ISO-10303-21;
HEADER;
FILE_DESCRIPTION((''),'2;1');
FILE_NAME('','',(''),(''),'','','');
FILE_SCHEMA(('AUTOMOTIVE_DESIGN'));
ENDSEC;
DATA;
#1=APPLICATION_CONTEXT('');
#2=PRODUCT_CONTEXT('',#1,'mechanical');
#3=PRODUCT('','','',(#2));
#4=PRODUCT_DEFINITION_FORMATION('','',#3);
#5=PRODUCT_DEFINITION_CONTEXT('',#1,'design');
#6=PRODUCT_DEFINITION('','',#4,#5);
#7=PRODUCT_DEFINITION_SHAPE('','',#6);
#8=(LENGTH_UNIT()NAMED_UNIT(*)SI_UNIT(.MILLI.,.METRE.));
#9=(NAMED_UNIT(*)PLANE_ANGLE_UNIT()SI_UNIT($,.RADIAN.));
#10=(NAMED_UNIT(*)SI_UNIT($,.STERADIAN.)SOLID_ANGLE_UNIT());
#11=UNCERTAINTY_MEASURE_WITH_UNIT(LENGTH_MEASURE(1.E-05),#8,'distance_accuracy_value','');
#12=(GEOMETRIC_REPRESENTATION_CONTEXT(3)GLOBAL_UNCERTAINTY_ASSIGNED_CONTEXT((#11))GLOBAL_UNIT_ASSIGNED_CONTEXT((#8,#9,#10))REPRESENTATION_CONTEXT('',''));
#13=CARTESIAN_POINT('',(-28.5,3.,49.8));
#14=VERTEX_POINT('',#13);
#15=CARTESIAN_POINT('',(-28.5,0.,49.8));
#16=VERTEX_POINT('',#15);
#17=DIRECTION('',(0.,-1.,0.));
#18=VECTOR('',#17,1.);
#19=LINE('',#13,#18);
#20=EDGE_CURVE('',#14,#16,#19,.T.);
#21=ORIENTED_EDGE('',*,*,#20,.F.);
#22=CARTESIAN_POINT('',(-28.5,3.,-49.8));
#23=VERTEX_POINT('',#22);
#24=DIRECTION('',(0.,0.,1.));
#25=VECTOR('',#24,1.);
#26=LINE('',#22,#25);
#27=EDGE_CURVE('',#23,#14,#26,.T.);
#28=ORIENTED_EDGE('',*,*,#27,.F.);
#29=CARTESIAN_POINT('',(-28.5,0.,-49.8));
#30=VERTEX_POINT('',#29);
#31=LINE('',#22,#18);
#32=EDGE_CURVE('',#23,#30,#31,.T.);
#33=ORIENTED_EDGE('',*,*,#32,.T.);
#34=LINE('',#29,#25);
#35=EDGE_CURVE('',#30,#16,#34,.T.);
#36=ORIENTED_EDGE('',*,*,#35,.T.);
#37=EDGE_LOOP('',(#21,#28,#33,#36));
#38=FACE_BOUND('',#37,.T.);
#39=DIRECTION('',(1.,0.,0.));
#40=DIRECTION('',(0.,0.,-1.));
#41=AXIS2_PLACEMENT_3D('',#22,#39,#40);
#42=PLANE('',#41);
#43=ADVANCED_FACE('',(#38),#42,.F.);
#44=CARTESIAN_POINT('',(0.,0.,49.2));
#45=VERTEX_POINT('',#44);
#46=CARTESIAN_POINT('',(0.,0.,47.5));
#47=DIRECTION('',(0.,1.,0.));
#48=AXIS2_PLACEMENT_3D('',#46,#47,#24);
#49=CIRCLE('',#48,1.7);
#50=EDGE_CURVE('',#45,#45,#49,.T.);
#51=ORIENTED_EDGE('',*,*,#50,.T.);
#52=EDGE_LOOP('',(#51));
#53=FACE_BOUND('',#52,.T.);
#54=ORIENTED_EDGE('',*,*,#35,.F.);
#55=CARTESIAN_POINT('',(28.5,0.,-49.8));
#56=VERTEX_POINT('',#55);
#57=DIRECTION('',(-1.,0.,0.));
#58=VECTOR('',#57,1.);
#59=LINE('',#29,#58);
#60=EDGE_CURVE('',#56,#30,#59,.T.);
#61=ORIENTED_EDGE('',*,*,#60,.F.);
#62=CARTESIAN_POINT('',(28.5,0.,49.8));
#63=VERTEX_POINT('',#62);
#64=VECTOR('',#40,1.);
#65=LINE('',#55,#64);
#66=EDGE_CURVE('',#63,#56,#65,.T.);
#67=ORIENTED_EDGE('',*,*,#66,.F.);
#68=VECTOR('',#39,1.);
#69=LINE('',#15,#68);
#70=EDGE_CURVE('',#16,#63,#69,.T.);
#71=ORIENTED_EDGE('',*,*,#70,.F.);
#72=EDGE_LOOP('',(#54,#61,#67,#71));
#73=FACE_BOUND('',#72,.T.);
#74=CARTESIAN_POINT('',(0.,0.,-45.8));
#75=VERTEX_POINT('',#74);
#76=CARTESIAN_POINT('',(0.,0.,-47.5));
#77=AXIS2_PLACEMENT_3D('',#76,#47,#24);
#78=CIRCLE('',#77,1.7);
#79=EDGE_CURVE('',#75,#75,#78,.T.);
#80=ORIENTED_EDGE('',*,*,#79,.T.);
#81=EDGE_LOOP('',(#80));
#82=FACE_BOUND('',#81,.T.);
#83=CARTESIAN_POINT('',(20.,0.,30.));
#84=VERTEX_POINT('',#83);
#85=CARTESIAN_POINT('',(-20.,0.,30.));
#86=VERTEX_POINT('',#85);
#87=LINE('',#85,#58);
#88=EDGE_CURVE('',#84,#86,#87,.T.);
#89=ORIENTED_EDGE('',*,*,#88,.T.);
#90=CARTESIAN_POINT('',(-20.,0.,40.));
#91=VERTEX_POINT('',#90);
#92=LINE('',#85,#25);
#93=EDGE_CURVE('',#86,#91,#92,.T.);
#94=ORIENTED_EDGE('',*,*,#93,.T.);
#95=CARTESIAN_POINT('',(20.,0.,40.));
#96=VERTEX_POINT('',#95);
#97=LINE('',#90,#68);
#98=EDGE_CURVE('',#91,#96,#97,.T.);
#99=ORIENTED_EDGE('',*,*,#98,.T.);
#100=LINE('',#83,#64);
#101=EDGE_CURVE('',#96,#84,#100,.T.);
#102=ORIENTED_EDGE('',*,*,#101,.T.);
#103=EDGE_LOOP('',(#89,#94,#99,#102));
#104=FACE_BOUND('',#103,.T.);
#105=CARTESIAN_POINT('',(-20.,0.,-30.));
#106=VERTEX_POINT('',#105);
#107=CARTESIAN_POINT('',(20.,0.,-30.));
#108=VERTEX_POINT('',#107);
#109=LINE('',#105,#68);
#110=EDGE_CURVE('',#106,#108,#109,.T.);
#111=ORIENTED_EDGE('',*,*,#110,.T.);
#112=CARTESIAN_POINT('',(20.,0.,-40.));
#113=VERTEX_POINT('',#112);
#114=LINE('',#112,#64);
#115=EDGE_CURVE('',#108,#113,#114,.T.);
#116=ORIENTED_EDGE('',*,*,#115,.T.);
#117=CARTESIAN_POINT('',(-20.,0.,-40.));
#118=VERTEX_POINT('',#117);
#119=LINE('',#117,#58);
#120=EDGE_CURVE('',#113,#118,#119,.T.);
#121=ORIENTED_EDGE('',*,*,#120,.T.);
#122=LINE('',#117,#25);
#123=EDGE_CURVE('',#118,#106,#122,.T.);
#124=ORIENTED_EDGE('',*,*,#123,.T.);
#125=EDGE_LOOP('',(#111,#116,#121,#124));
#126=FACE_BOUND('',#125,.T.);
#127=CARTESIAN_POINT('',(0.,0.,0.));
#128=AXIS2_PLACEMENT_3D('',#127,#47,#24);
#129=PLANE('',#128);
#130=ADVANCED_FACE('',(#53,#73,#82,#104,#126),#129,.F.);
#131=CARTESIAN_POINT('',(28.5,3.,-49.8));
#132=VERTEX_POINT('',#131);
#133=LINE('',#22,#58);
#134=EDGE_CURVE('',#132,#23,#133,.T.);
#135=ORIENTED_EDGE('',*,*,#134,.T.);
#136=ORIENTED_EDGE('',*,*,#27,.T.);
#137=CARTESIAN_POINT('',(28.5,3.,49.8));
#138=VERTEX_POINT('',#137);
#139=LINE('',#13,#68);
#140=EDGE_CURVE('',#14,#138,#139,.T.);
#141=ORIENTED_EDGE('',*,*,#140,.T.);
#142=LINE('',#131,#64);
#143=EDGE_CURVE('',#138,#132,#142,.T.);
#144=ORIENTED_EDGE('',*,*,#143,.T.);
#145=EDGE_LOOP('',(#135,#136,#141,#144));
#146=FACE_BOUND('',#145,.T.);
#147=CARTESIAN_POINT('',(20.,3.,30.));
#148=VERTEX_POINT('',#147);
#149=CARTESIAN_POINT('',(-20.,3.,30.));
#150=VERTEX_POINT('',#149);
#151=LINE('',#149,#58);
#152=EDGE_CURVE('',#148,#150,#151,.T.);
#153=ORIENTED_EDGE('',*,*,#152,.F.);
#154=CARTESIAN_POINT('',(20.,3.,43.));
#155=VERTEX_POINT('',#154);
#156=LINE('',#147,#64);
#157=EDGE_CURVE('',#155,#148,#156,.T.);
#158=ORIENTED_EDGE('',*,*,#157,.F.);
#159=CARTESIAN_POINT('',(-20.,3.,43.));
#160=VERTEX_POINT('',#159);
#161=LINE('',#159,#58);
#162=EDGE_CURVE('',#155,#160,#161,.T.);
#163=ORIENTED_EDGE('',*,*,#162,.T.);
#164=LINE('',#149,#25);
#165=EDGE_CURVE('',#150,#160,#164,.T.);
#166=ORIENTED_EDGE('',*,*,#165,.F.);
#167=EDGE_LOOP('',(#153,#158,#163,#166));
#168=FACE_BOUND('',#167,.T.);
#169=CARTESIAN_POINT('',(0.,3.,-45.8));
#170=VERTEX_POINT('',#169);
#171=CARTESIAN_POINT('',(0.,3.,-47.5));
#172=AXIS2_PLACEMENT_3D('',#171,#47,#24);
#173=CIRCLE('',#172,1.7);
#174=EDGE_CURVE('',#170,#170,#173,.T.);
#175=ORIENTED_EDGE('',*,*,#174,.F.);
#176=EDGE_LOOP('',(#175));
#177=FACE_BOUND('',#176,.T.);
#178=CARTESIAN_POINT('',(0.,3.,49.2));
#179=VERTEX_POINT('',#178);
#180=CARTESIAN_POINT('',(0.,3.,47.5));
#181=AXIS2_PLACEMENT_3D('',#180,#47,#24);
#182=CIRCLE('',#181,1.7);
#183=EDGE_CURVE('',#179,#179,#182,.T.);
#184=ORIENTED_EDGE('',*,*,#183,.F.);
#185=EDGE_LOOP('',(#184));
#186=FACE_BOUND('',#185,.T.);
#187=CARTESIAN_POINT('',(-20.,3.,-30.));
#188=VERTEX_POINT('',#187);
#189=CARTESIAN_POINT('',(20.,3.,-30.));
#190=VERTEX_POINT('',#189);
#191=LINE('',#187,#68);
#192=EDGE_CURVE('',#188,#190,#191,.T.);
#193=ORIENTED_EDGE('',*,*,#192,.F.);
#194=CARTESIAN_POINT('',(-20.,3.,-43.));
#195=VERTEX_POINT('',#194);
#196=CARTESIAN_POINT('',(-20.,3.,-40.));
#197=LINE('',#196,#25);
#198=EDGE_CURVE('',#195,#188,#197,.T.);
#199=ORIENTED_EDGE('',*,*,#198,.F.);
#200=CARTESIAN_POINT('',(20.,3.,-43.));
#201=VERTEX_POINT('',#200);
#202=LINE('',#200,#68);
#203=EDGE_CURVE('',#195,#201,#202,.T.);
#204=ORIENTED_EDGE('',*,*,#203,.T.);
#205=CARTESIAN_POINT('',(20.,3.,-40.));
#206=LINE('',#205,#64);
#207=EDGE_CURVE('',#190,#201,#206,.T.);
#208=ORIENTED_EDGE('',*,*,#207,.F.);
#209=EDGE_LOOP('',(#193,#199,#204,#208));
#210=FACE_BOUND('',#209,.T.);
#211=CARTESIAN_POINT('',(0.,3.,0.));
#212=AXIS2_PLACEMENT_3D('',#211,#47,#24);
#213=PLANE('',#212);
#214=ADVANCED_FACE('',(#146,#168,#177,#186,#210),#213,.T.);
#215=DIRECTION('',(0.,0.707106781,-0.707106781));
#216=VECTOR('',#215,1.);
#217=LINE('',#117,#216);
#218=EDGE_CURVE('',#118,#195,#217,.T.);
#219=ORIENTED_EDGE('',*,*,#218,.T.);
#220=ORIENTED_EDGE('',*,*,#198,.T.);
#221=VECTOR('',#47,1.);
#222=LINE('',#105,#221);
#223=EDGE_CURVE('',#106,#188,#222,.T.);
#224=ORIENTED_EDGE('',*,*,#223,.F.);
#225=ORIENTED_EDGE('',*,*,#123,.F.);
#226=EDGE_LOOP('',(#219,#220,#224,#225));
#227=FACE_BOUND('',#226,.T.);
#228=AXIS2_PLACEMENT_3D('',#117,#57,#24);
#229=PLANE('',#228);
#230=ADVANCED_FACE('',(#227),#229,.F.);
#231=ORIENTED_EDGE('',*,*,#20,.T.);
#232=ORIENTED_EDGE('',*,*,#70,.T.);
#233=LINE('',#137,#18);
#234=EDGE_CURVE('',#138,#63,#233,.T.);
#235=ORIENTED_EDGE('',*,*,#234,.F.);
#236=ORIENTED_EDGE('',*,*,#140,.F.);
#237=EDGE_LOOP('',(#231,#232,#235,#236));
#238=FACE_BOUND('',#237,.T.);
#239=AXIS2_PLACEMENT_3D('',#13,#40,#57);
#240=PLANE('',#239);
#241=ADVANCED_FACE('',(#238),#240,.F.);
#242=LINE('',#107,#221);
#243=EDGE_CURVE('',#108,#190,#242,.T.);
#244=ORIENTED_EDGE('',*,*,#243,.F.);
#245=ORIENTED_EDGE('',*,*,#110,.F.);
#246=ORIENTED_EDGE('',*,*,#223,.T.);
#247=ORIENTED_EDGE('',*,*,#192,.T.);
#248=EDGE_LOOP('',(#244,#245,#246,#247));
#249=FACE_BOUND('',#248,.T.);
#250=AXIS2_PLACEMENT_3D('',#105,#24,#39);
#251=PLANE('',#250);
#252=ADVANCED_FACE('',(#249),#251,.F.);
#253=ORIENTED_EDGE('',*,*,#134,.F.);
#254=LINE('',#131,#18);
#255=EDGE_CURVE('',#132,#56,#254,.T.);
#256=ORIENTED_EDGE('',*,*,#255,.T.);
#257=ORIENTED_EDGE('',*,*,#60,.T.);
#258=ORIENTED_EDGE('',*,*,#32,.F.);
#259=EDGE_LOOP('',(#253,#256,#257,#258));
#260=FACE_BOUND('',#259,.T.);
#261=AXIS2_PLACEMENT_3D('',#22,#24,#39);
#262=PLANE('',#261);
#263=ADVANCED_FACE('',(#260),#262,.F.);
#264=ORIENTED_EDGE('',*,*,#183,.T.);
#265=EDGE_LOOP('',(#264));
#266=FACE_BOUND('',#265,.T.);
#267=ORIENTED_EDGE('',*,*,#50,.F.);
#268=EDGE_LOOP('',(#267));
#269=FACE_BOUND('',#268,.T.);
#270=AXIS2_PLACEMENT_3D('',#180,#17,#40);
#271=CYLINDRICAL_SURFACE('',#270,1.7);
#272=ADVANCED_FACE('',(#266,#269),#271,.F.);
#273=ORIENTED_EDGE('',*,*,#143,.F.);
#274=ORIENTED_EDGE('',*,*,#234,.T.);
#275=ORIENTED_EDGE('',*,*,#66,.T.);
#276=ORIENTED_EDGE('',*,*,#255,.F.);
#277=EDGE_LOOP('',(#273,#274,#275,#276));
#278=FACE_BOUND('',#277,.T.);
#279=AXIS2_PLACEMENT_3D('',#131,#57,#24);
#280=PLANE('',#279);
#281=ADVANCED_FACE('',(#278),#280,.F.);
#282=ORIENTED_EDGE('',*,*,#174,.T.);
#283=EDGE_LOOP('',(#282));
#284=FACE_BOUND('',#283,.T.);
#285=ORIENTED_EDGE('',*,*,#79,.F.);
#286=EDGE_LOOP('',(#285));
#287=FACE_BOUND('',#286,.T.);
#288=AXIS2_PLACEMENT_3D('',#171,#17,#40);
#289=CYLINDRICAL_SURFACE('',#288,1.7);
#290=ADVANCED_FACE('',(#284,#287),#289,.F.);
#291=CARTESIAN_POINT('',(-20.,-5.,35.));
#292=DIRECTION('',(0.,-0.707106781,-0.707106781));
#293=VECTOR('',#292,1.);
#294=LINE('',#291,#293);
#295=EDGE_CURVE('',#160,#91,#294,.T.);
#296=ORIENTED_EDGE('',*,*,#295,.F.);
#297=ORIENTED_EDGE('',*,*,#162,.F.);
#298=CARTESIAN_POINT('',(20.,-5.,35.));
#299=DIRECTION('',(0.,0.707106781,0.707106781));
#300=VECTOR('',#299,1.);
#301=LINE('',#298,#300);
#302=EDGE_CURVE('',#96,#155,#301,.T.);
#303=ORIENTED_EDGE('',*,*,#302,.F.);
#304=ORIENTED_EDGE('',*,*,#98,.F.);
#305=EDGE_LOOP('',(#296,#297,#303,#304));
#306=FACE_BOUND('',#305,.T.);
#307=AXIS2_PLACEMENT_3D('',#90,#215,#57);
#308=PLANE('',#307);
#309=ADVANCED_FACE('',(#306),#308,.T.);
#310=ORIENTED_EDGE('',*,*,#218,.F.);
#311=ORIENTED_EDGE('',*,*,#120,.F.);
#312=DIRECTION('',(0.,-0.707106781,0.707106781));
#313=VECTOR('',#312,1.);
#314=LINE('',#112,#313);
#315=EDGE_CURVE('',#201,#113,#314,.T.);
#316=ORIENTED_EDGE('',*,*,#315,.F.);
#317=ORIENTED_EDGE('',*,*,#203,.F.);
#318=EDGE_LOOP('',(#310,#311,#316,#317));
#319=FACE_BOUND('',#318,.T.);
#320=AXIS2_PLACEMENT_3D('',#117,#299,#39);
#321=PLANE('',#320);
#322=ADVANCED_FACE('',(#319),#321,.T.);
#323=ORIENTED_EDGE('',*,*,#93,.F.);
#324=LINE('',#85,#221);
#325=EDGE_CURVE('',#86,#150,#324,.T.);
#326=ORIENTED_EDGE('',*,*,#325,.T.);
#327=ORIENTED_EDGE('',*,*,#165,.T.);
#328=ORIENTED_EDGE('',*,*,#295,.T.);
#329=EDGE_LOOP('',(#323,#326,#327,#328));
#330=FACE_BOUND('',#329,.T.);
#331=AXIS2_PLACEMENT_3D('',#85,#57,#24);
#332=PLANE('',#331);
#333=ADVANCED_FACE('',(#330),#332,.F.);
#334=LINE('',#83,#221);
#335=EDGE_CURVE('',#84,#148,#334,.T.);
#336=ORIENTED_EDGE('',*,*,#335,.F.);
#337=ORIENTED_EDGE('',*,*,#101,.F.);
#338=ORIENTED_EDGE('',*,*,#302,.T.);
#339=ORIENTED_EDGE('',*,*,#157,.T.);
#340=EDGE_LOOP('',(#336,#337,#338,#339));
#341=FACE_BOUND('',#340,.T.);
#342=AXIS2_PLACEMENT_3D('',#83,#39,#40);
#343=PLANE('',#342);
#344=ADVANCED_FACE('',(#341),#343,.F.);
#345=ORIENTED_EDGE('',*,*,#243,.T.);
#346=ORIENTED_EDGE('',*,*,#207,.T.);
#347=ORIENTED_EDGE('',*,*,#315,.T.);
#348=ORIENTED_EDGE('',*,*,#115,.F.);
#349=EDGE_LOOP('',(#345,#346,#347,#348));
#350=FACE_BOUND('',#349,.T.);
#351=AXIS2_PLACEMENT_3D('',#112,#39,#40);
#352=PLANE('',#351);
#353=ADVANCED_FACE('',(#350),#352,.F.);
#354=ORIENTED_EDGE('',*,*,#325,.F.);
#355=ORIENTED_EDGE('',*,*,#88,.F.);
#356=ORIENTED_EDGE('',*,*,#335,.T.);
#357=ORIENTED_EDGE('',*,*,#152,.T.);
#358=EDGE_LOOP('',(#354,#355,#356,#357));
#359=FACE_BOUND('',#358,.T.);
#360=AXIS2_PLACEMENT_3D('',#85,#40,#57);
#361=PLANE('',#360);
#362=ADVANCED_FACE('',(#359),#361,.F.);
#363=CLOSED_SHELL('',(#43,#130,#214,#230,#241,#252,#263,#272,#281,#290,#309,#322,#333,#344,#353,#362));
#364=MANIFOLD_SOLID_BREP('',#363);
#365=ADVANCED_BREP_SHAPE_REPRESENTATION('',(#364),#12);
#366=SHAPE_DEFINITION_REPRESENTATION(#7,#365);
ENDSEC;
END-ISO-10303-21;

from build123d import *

# Parameters (mm, degrees)
SKETCH_1_W          = 57
SKETCH_1_H          = 99.6
SKETCH_1_R          = 1.7
EXTRUDE_1_DEPTH     = 3
SKETCH_2_W          = 40
SKETCH_2_H          = 10
CUT_EXTRUDE_1_DEPTH = 3
CHAMFER_1_SIZE      = 3


with BuildPart() as part:
    # 草图1 → 凸台-拉伸1 (new body)
    with BuildSketch(Plane(origin=(0, 0, 0), x_dir=(1, 0, 0), z_dir=(0, 1, 0))):
        Rectangle(SKETCH_1_W, SKETCH_1_H)
        with Locations(Location((0, 47.5, 0), (0, 0, 270))):
            Circle(SKETCH_1_R, mode=Mode.SUBTRACT)
        with Locations(Location((0, -47.5, 0), (0, 0, 270))):
            Circle(SKETCH_1_R, mode=Mode.SUBTRACT)
    extrude(amount=EXTRUDE_1_DEPTH)

    # 草图2 → 切除-拉伸1 (cut)
    with BuildSketch(Plane(origin=(0, 3, 0), x_dir=(1, 0, 0), z_dir=(0, 1, 0))):
        with Locations((0, 35)):
            Rectangle(SKETCH_2_W, SKETCH_2_H)
        with Locations((0, -35)):
            Rectangle(SKETCH_2_W, SKETCH_2_H)
    extrude(amount=-CUT_EXTRUDE_1_DEPTH, mode=Mode.SUBTRACT)

    # 倒角1
    chamfer_1_edges = [part.edges().sort_by_distance(p)[0] for p in [
        (0, 3, 40),
        (0, 3, -40),
    ]]
    chamfer(chamfer_1_edges, length=CHAMFER_1_SIZE - 0.0001)  # a hair under: the kernel refuses the full size


solid = part.part
